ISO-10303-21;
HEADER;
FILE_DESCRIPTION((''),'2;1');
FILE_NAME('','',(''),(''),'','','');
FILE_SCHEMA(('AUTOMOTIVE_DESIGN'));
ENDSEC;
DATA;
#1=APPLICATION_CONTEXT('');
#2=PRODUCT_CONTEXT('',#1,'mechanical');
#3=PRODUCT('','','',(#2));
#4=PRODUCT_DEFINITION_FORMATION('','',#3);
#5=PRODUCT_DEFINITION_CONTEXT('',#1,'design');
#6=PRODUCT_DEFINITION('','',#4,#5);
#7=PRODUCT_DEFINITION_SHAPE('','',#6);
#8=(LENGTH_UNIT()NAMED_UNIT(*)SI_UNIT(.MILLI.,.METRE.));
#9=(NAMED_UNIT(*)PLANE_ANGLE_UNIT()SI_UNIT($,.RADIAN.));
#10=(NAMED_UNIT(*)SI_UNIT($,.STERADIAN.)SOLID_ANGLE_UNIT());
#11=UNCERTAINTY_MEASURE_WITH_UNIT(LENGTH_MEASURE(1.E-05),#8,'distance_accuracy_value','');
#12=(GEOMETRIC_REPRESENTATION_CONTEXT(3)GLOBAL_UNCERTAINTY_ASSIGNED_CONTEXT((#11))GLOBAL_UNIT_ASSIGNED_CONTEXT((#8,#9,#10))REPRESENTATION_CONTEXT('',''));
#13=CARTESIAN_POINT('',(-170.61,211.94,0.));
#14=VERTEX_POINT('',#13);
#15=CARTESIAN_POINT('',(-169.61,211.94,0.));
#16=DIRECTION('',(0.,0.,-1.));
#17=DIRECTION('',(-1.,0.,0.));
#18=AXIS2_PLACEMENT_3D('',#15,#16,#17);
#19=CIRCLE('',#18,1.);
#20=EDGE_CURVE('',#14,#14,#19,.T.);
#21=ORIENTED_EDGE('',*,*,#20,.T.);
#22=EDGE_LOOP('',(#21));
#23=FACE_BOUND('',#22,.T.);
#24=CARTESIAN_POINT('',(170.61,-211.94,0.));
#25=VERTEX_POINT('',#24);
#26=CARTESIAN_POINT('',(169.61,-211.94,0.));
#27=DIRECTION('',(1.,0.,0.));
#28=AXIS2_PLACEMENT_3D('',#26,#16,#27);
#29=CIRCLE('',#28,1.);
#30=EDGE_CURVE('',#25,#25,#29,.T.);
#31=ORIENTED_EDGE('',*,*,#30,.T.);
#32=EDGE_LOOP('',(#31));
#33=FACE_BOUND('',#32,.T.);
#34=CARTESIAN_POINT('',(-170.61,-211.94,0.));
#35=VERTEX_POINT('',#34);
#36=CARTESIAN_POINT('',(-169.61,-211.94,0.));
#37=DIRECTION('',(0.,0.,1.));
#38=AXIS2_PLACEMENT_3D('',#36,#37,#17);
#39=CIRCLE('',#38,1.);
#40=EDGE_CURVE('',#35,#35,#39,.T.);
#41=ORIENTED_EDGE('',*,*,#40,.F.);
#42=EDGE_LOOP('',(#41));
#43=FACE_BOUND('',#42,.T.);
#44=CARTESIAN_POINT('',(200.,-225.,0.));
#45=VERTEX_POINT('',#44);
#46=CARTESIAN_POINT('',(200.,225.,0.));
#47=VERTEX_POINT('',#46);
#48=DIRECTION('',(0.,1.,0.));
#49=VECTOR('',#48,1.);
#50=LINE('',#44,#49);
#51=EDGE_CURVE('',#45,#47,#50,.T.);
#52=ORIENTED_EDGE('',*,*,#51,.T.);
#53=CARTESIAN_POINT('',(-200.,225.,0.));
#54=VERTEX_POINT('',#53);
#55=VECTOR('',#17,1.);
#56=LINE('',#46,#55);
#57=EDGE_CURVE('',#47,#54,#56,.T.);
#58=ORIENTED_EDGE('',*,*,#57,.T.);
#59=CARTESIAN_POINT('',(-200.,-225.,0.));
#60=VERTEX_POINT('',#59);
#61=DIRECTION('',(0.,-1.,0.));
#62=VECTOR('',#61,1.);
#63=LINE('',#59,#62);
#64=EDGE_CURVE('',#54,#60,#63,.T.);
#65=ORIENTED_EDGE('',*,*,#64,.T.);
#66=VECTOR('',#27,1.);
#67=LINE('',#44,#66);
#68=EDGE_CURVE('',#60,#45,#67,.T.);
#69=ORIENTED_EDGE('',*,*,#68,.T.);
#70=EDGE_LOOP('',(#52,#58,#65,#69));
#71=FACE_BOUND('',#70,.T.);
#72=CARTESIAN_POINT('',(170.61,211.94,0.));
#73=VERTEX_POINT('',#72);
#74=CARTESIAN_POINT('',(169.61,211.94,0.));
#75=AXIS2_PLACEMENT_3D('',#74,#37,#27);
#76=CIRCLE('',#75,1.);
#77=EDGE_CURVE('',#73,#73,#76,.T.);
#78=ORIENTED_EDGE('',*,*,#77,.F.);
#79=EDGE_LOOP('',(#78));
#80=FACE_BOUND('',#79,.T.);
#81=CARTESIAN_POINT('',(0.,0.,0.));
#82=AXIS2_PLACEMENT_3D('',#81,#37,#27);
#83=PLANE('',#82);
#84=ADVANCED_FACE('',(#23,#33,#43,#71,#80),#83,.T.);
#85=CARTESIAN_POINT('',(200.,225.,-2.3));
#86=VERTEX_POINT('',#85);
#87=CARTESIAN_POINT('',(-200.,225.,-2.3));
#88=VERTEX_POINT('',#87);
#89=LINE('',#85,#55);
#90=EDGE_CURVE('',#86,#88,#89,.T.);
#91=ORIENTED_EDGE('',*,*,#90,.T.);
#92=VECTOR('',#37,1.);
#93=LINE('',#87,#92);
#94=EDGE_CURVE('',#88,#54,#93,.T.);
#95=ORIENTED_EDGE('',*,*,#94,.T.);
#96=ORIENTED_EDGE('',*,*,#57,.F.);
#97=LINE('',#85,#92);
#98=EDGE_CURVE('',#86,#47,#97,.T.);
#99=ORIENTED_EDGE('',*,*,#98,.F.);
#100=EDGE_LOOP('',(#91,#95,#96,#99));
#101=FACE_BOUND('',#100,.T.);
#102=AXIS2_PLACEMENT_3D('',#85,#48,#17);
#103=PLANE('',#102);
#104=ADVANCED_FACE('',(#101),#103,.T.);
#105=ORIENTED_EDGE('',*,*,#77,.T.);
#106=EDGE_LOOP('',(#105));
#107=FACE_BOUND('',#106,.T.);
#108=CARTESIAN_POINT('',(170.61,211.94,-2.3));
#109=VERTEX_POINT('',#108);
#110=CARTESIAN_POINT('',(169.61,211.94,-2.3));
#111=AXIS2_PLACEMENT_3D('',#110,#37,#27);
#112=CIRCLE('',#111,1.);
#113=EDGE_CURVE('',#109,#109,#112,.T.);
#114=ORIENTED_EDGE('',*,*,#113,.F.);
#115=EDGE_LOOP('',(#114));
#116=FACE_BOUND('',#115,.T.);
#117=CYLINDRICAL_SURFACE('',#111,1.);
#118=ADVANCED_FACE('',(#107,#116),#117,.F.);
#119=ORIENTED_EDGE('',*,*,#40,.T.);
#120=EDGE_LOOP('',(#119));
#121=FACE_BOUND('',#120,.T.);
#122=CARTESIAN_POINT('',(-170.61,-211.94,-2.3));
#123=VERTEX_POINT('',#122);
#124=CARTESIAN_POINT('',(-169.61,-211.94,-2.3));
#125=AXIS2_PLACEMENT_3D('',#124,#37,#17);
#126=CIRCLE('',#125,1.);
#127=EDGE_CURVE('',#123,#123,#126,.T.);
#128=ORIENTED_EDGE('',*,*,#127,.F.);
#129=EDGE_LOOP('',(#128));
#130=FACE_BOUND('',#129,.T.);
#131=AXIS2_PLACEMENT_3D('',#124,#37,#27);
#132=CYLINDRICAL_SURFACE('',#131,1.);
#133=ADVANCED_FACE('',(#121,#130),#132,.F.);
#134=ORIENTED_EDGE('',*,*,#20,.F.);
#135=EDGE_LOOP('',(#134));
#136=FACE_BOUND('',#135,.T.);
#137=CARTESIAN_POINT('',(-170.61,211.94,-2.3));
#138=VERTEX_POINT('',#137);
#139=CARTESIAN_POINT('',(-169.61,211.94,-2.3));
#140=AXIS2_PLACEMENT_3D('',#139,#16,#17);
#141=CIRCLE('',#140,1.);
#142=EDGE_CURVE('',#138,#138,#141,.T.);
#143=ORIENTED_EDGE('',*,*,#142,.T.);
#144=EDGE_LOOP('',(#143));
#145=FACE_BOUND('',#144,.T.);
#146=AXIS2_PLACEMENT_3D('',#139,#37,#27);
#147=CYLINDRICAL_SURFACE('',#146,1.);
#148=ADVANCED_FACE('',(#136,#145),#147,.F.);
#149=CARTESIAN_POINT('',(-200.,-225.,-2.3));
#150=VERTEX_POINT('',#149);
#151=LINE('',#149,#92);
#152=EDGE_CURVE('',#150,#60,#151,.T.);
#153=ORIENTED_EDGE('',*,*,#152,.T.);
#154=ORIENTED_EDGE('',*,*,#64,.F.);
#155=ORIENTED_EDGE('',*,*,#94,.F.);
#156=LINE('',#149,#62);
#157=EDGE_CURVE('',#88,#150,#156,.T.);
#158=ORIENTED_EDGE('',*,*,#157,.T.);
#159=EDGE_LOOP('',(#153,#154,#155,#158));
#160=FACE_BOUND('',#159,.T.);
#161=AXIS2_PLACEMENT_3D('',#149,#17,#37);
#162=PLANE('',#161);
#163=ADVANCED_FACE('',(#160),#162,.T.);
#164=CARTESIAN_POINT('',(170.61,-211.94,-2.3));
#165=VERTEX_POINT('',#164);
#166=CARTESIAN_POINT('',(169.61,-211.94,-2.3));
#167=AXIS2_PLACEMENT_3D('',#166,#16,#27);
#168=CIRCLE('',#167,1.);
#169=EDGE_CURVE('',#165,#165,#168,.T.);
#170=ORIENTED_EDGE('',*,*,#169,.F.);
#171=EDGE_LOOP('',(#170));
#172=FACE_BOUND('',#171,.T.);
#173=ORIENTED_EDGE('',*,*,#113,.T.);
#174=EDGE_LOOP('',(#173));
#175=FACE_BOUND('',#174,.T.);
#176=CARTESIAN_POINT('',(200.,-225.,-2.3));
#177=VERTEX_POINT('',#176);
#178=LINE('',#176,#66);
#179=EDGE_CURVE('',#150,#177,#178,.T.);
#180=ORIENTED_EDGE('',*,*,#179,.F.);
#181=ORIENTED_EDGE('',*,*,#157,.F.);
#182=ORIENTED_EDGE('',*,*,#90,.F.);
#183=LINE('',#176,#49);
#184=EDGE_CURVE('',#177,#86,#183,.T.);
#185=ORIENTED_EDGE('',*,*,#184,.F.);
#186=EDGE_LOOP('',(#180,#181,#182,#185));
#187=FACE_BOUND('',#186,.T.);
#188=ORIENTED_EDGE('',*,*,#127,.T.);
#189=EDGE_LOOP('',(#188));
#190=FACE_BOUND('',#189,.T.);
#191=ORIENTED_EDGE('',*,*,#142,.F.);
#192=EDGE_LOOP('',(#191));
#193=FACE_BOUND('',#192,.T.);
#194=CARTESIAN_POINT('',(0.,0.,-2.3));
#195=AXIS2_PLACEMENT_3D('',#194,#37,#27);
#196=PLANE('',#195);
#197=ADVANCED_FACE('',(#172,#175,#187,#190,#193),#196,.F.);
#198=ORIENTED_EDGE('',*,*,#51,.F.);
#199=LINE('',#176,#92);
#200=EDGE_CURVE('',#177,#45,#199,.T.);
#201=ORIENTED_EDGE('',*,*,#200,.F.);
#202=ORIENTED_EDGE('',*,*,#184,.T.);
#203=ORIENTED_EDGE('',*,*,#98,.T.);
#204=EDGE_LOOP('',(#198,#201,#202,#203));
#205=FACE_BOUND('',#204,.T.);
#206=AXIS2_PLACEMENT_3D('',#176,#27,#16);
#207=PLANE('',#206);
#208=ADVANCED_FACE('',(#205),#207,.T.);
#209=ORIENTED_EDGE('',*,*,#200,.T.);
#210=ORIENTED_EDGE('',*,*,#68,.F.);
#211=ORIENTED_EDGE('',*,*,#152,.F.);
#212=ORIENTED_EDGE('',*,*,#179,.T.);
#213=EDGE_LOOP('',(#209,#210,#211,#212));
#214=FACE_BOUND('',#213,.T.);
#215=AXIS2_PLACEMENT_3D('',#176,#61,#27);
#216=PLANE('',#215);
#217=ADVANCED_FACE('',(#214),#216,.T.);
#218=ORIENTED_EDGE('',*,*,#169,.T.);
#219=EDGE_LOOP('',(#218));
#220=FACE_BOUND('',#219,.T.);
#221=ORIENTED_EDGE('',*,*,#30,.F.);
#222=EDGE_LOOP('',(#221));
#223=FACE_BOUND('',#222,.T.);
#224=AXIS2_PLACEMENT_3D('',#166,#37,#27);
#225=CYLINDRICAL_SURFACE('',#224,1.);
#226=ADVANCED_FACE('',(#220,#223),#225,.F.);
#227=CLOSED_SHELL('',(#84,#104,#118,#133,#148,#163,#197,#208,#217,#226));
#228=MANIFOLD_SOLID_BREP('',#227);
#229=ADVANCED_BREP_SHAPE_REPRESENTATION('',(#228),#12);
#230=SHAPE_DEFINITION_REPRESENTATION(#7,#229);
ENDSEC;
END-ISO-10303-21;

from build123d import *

# Parameters (mm, degrees)
SKETCH1_W               = 400
SKETCH1_H               = 450
BASE_FLANGE1_DEPTH      = 2.3
SKETCH5_R               = 1
CUT_EXTRUDE4_DEPTH      = 302.048650553
MIRROR4_COPY_1_SKETCH_R = 1
MIRROR4_COPY_1_DEPTH    = 302.048650553


# Sheet-metal steps are written as plain solids
with BuildPart() as part:
    # Sketch1 → Base-Flange1 (new body)
    with BuildSketch(Plane.XY):
        Rectangle(SKETCH1_W, SKETCH1_H)
    extrude(amount=-BASE_FLANGE1_DEPTH)

    # Sketch5 → Cut-Extrude4 (cut, through all)
    with BuildSketch(Plane.XY):
        with Locations((169.61, 211.94)):
            Circle(SKETCH5_R)
    cut_extrude4 = extrude(amount=-CUT_EXTRUDE4_DEPTH, mode=Mode.SUBTRACT)

    # Mirror3: Cut-Extrude4 across plane
    add(cut_extrude4.mirror(Plane.ZX), mode=Mode.SUBTRACT)

    # Mirror4: Cut-Extrude4 across plane
    add(cut_extrude4.mirror(Plane(origin=(0, 0, 0), x_dir=(0, 0, 1), z_dir=(1, 0, 0))), mode=Mode.SUBTRACT)

    # Mirror4 copy 1 sketch → Mirror4 copy 1 (cut, through all)
    with BuildSketch(Plane(origin=(0, 0, 0), x_dir=(-1, 0, 0), z_dir=(0, 0, 1))):
        with Locations((169.61, 211.94)):
            Circle(MIRROR4_COPY_1_SKETCH_R)
    extrude(amount=-MIRROR4_COPY_1_DEPTH, mode=Mode.SUBTRACT)


solid = part.part
